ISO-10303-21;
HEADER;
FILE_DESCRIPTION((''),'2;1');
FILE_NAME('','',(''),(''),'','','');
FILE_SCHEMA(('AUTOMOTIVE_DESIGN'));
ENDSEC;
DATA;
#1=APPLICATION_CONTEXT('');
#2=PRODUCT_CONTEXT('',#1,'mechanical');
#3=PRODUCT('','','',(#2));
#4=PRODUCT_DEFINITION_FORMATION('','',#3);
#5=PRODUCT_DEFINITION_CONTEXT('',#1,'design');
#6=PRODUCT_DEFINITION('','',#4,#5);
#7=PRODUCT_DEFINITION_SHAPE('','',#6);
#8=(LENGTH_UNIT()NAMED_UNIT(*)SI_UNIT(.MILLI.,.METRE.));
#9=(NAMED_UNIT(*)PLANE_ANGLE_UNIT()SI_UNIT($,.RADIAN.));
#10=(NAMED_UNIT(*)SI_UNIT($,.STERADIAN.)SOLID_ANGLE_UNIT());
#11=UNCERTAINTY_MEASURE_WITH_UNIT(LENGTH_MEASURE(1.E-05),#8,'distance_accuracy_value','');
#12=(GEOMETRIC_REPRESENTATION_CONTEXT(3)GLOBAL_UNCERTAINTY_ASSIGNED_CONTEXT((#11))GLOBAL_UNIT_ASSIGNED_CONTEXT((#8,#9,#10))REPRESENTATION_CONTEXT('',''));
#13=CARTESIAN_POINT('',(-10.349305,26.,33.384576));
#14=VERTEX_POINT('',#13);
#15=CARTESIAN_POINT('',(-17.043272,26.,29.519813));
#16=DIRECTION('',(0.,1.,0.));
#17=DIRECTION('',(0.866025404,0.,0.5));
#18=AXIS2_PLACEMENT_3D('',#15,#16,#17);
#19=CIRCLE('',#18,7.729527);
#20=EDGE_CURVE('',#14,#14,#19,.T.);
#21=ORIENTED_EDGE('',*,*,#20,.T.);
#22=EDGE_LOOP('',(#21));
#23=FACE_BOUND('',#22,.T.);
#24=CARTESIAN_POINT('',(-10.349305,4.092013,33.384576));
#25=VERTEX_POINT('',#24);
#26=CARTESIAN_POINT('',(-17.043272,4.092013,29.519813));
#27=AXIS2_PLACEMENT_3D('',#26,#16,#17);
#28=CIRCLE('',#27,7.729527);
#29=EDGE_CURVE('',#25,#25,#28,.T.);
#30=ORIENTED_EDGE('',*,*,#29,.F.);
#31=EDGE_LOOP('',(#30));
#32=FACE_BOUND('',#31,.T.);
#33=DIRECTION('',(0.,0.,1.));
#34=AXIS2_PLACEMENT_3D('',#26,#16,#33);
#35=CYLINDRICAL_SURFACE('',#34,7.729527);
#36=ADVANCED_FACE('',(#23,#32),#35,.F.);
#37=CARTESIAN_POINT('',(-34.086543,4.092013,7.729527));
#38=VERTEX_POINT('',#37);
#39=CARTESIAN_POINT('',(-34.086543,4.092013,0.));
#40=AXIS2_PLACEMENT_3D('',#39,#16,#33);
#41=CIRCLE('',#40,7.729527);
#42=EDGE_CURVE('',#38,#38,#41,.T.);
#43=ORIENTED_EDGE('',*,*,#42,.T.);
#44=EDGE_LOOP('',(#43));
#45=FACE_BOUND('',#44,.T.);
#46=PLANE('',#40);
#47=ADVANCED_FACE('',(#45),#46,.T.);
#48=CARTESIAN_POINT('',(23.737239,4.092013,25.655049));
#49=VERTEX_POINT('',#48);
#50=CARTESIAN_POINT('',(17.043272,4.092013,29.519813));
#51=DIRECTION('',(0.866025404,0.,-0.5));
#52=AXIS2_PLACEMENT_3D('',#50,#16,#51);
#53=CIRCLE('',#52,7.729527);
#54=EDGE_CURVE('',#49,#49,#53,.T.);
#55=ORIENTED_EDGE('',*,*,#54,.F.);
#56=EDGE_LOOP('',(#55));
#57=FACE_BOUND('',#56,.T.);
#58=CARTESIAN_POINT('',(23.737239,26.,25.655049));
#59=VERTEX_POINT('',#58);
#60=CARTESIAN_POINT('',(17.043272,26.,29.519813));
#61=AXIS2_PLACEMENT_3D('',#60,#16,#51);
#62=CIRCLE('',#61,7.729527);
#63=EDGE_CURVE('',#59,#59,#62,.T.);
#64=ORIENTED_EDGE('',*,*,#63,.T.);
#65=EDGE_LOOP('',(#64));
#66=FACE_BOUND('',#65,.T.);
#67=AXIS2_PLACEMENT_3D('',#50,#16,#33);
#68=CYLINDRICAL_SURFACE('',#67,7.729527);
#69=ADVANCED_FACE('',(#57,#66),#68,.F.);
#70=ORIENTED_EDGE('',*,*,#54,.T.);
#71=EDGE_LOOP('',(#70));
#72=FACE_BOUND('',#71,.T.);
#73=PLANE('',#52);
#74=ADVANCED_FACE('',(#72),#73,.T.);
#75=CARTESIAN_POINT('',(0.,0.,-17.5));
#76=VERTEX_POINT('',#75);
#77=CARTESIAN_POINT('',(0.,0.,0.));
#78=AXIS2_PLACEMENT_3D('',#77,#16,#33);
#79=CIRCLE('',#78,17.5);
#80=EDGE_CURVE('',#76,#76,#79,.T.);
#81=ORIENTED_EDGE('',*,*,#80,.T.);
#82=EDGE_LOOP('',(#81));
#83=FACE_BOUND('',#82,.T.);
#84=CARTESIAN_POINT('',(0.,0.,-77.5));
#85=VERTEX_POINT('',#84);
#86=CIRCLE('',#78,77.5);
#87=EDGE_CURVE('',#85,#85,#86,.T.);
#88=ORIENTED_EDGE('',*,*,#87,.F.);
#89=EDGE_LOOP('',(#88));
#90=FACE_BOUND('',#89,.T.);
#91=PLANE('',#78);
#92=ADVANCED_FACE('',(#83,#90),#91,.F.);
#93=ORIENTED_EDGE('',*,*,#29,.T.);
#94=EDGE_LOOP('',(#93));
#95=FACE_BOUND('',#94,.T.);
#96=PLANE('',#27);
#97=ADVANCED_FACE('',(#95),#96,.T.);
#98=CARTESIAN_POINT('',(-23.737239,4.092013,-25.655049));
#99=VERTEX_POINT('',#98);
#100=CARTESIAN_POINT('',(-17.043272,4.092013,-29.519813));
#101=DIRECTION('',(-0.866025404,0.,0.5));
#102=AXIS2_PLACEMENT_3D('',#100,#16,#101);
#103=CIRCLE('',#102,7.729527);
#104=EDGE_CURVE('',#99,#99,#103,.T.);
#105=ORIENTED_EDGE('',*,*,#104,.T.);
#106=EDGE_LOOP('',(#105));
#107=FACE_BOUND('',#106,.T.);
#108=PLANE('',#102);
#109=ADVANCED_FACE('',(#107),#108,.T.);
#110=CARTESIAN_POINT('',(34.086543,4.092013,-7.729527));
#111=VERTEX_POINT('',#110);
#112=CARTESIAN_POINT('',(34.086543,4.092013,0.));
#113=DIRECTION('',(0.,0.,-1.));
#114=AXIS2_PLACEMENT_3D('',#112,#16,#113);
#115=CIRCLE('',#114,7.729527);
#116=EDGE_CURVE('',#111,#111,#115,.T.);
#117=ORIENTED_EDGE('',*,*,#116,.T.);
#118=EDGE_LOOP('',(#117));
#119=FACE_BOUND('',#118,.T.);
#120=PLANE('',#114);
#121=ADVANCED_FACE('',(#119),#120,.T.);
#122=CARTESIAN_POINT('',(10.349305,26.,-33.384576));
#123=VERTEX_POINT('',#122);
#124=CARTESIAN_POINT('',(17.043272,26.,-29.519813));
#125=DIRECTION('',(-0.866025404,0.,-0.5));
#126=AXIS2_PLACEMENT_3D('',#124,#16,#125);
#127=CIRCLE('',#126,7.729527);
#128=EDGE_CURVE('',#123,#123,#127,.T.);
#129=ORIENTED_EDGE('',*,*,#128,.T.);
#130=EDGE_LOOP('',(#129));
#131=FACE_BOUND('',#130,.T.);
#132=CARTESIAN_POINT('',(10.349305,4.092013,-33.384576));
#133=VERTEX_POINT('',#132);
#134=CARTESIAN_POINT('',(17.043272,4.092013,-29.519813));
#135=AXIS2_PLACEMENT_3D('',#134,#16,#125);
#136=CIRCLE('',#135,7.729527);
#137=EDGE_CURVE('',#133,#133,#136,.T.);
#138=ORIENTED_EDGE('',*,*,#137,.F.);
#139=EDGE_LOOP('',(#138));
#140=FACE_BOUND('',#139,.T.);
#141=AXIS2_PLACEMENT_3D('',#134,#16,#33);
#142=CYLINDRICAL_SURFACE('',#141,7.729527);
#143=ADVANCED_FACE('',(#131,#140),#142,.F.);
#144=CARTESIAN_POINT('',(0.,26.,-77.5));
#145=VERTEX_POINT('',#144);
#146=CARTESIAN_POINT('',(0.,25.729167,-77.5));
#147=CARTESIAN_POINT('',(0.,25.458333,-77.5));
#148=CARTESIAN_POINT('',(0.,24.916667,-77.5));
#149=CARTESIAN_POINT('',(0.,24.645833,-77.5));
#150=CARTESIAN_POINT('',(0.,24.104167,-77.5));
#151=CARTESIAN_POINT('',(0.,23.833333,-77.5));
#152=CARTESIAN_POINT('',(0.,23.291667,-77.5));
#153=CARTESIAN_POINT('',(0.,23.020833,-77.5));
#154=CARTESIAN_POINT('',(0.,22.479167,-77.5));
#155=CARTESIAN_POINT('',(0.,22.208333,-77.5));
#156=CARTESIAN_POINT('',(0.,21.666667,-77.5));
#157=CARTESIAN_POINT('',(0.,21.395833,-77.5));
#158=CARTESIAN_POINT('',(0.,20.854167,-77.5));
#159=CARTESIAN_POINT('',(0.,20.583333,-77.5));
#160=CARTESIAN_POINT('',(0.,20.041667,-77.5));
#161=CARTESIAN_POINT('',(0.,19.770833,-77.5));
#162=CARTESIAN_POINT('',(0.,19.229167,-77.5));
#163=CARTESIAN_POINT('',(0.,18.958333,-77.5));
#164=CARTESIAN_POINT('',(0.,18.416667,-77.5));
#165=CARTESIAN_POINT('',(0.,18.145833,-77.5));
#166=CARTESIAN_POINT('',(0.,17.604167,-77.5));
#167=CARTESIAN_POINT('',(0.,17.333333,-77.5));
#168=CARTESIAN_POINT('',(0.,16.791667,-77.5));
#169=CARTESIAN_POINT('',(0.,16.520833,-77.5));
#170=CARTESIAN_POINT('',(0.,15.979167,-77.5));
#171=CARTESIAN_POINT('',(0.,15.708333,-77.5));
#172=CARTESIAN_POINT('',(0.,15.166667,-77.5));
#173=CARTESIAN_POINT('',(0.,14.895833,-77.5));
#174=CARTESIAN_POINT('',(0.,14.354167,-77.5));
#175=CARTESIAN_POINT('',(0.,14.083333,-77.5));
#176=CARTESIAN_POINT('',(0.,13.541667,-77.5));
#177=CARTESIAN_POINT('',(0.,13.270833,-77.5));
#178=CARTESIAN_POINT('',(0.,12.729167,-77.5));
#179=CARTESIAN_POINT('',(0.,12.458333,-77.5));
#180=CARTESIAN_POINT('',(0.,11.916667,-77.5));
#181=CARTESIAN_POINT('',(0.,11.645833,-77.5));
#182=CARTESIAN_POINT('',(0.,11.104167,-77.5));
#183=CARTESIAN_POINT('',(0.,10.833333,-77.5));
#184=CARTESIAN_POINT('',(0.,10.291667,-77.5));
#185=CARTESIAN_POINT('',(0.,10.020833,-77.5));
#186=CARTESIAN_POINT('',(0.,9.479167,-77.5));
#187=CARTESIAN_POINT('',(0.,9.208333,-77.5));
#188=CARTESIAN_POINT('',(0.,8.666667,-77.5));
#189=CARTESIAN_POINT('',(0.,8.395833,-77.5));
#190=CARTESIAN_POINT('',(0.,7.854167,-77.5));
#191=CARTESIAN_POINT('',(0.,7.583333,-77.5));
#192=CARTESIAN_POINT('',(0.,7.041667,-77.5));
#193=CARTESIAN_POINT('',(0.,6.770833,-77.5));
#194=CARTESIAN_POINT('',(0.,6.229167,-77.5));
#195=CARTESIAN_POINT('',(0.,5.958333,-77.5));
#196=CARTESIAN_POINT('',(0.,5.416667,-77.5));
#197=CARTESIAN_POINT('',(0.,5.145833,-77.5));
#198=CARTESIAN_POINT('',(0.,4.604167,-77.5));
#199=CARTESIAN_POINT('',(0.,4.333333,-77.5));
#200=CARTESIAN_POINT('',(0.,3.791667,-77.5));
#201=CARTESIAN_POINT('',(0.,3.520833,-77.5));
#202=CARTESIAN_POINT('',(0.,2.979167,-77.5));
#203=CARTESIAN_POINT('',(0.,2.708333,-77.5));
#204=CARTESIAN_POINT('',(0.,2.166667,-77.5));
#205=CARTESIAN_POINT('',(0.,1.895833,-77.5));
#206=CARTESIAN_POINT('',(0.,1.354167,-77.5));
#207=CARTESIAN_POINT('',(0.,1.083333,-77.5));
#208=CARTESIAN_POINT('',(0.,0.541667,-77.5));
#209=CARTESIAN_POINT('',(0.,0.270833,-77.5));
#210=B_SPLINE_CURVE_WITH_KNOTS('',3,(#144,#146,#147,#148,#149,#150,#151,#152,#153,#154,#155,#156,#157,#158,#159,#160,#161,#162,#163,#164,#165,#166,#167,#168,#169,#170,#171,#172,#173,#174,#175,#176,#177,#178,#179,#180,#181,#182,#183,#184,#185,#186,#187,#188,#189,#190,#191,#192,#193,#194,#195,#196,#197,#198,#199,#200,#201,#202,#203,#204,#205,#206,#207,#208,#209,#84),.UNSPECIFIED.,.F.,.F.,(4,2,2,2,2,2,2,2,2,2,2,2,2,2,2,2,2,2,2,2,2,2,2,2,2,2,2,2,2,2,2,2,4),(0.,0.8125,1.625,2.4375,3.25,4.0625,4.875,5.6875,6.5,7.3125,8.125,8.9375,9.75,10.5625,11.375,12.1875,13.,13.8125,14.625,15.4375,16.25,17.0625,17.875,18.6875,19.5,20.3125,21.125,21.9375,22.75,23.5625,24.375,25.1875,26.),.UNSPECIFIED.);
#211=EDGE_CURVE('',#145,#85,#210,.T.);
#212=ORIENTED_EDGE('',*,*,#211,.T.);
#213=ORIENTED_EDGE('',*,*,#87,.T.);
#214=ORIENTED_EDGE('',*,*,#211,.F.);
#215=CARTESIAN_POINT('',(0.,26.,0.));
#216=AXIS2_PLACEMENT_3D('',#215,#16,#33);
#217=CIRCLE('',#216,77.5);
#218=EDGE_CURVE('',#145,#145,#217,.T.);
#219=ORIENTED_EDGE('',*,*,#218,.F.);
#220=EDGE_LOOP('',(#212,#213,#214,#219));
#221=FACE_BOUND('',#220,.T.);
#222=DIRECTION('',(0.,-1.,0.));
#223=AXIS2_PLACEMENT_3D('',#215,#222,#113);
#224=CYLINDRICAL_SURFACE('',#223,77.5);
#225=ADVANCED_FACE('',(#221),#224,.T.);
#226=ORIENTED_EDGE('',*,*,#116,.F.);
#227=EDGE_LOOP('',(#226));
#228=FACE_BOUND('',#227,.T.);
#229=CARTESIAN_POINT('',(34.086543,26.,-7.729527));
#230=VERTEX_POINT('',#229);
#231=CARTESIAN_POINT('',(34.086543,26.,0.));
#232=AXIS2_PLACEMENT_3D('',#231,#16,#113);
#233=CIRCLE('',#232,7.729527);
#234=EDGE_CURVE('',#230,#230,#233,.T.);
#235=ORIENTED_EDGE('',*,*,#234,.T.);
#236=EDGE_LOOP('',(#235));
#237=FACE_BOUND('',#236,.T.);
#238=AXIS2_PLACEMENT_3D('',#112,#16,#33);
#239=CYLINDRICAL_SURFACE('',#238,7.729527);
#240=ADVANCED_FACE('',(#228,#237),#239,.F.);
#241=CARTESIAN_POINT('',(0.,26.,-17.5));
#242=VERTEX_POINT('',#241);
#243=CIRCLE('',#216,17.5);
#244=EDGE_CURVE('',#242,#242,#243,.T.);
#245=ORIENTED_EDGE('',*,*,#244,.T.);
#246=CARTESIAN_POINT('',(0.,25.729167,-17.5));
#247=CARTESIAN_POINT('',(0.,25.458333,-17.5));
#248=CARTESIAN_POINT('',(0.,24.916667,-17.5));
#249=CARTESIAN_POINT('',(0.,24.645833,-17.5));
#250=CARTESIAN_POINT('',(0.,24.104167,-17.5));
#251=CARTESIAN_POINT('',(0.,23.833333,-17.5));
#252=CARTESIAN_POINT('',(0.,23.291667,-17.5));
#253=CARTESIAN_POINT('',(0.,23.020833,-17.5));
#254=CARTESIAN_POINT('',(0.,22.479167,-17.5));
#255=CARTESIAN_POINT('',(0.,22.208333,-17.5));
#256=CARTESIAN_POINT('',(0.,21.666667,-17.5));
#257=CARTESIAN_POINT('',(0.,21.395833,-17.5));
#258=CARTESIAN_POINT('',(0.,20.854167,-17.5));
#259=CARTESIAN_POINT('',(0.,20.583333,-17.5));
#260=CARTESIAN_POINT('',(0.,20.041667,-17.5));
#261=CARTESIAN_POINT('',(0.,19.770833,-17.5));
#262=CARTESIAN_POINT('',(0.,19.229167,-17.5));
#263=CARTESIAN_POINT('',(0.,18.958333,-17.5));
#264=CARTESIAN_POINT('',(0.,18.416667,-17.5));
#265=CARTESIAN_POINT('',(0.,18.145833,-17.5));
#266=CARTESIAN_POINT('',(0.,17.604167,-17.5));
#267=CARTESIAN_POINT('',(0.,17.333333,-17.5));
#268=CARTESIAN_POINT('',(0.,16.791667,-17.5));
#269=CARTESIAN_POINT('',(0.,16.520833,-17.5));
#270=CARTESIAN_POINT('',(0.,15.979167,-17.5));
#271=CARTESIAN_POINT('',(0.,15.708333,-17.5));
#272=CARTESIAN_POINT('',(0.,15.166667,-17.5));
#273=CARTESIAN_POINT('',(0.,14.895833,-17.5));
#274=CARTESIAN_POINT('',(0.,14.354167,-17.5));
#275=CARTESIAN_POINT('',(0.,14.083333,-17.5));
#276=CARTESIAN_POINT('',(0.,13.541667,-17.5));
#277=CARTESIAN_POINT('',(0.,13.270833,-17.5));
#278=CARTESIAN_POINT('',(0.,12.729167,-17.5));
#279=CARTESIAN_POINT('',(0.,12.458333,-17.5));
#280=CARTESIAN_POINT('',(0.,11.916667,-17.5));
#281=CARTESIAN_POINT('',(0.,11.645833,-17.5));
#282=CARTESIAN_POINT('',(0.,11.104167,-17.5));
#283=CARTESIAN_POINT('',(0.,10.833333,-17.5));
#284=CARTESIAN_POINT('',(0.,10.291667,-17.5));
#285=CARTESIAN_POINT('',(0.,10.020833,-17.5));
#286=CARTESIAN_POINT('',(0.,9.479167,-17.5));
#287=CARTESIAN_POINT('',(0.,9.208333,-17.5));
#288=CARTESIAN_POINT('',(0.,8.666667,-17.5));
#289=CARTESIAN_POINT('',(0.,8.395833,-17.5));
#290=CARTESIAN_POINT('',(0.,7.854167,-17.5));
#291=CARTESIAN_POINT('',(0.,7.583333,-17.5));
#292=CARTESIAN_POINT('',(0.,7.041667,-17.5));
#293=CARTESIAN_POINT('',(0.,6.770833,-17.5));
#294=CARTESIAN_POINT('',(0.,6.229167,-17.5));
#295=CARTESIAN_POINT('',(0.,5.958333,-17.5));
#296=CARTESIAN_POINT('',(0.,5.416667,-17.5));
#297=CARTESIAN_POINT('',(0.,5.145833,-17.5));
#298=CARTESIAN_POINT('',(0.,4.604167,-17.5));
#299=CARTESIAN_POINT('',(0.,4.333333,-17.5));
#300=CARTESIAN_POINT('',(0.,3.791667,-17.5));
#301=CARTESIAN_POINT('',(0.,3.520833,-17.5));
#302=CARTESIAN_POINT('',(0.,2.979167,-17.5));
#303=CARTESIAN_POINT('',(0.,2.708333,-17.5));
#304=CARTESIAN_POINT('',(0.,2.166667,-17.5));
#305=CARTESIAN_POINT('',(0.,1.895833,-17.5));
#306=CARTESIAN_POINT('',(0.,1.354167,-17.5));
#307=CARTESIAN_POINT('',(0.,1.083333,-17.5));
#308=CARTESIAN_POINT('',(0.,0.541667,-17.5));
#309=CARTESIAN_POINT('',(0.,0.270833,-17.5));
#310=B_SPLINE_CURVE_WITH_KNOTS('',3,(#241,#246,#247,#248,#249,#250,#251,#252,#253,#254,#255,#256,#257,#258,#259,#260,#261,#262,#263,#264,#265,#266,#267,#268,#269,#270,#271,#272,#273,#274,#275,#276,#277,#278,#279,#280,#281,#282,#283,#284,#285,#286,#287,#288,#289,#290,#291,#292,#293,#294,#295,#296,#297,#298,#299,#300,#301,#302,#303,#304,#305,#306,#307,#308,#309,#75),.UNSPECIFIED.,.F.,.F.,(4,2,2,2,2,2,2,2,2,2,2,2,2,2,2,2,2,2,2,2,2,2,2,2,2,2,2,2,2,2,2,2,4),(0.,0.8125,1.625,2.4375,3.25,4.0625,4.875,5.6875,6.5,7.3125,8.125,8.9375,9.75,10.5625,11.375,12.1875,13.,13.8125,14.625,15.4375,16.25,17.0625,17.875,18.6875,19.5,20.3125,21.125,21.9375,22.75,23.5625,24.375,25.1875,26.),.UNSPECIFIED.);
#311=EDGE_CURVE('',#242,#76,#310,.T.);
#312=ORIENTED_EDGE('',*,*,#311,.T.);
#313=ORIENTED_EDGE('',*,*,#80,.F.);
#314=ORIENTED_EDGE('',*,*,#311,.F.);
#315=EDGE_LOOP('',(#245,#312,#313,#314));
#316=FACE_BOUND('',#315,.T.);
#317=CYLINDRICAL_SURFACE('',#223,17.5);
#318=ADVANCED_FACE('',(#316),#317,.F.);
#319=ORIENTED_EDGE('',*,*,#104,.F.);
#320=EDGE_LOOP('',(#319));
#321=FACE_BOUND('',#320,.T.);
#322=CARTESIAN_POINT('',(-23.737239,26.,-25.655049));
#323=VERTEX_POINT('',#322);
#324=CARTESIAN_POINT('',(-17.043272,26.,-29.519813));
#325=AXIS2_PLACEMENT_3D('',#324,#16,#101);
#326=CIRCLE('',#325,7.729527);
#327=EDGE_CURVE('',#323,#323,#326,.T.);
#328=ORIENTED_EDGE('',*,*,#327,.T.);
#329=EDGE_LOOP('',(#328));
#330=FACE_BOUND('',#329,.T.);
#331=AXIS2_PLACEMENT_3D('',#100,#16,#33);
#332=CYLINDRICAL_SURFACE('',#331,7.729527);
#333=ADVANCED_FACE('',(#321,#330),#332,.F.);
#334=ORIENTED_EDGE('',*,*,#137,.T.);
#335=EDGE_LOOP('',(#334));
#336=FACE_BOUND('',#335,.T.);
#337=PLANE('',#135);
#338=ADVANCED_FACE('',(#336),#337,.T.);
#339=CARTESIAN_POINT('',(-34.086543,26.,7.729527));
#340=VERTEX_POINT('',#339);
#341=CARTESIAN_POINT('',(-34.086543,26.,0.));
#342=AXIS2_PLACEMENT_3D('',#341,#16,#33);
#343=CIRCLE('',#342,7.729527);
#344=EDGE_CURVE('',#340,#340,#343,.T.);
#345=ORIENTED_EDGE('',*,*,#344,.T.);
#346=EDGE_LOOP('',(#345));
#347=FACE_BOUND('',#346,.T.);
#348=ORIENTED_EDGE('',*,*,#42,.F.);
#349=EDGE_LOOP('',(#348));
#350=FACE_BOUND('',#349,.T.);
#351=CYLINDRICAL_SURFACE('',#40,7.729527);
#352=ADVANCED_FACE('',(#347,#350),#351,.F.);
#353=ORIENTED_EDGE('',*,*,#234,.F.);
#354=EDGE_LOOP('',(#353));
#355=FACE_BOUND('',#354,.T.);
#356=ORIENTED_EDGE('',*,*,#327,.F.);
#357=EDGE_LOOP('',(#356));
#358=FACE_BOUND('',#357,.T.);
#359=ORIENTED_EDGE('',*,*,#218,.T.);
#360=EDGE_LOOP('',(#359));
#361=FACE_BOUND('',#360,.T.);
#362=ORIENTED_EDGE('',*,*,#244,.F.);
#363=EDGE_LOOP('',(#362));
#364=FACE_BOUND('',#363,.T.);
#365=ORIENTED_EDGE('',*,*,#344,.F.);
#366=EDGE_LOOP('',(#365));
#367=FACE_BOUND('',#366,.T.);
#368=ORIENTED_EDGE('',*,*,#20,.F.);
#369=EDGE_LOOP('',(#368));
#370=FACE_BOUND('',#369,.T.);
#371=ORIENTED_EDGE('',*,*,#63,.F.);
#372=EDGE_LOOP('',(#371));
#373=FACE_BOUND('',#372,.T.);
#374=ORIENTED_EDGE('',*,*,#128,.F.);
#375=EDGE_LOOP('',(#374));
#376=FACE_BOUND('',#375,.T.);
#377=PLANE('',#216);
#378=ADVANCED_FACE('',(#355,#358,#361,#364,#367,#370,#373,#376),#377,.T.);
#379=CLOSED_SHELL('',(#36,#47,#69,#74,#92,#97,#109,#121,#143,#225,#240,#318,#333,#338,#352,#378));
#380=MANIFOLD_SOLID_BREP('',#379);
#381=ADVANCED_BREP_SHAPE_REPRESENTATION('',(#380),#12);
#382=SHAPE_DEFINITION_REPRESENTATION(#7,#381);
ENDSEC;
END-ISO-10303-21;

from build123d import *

# Parameters (mm, degrees)
SKETCH1_R           = 77.5
BOSS_EXTRUDE1_DEPTH = 26
SKETCH2_R           = 17.5
CUT_EXTRUDE1_DEPTH  = 113.643242141
SKETCH3_R           = 7.729527312
CUT_EXTRUDE2_DEPTH  = 21.907986857
CIRPATTERN1_COUNT   = 6


with BuildPart() as part:
    # Sketch1 → Boss-Extrude1 (new body)
    with BuildSketch(Plane(origin=(0, 0, 0), x_dir=(1, 0, 0), z_dir=(0, 1, 0))):
        Circle(SKETCH1_R)
    extrude(amount=BOSS_EXTRUDE1_DEPTH)

    # Sketch2 → Cut-Extrude1 (cut, through all)
    with BuildSketch(Plane(origin=(0, 0, 0), x_dir=(1, 0, 0), z_dir=(0, 1, 0))):
        Circle(SKETCH2_R)
    extrude(amount=CUT_EXTRUDE1_DEPTH, mode=Mode.SUBTRACT)

    # Sketch3 → Cut-Extrude2 (cut)
    with BuildSketch(Plane(origin=(0, 26, 0), x_dir=(1, 0, 0), z_dir=(0, 1, 0))):
        with Locations((-34.086543474, 0)):
            Circle(SKETCH3_R)
    cut_extrude2 = extrude(amount=-CUT_EXTRUDE2_DEPTH, mode=Mode.SUBTRACT)

    # CirPattern1: Cut-Extrude2 ×6 about axis
    cirpattern1_axis = Axis((0, 0, 0), (0, 1, 0))
    for i in range(1, CIRPATTERN1_COUNT):
        add(cut_extrude2.rotate(cirpattern1_axis, i * 360 / CIRPATTERN1_COUNT), mode=Mode.SUBTRACT)


solid = part.part
